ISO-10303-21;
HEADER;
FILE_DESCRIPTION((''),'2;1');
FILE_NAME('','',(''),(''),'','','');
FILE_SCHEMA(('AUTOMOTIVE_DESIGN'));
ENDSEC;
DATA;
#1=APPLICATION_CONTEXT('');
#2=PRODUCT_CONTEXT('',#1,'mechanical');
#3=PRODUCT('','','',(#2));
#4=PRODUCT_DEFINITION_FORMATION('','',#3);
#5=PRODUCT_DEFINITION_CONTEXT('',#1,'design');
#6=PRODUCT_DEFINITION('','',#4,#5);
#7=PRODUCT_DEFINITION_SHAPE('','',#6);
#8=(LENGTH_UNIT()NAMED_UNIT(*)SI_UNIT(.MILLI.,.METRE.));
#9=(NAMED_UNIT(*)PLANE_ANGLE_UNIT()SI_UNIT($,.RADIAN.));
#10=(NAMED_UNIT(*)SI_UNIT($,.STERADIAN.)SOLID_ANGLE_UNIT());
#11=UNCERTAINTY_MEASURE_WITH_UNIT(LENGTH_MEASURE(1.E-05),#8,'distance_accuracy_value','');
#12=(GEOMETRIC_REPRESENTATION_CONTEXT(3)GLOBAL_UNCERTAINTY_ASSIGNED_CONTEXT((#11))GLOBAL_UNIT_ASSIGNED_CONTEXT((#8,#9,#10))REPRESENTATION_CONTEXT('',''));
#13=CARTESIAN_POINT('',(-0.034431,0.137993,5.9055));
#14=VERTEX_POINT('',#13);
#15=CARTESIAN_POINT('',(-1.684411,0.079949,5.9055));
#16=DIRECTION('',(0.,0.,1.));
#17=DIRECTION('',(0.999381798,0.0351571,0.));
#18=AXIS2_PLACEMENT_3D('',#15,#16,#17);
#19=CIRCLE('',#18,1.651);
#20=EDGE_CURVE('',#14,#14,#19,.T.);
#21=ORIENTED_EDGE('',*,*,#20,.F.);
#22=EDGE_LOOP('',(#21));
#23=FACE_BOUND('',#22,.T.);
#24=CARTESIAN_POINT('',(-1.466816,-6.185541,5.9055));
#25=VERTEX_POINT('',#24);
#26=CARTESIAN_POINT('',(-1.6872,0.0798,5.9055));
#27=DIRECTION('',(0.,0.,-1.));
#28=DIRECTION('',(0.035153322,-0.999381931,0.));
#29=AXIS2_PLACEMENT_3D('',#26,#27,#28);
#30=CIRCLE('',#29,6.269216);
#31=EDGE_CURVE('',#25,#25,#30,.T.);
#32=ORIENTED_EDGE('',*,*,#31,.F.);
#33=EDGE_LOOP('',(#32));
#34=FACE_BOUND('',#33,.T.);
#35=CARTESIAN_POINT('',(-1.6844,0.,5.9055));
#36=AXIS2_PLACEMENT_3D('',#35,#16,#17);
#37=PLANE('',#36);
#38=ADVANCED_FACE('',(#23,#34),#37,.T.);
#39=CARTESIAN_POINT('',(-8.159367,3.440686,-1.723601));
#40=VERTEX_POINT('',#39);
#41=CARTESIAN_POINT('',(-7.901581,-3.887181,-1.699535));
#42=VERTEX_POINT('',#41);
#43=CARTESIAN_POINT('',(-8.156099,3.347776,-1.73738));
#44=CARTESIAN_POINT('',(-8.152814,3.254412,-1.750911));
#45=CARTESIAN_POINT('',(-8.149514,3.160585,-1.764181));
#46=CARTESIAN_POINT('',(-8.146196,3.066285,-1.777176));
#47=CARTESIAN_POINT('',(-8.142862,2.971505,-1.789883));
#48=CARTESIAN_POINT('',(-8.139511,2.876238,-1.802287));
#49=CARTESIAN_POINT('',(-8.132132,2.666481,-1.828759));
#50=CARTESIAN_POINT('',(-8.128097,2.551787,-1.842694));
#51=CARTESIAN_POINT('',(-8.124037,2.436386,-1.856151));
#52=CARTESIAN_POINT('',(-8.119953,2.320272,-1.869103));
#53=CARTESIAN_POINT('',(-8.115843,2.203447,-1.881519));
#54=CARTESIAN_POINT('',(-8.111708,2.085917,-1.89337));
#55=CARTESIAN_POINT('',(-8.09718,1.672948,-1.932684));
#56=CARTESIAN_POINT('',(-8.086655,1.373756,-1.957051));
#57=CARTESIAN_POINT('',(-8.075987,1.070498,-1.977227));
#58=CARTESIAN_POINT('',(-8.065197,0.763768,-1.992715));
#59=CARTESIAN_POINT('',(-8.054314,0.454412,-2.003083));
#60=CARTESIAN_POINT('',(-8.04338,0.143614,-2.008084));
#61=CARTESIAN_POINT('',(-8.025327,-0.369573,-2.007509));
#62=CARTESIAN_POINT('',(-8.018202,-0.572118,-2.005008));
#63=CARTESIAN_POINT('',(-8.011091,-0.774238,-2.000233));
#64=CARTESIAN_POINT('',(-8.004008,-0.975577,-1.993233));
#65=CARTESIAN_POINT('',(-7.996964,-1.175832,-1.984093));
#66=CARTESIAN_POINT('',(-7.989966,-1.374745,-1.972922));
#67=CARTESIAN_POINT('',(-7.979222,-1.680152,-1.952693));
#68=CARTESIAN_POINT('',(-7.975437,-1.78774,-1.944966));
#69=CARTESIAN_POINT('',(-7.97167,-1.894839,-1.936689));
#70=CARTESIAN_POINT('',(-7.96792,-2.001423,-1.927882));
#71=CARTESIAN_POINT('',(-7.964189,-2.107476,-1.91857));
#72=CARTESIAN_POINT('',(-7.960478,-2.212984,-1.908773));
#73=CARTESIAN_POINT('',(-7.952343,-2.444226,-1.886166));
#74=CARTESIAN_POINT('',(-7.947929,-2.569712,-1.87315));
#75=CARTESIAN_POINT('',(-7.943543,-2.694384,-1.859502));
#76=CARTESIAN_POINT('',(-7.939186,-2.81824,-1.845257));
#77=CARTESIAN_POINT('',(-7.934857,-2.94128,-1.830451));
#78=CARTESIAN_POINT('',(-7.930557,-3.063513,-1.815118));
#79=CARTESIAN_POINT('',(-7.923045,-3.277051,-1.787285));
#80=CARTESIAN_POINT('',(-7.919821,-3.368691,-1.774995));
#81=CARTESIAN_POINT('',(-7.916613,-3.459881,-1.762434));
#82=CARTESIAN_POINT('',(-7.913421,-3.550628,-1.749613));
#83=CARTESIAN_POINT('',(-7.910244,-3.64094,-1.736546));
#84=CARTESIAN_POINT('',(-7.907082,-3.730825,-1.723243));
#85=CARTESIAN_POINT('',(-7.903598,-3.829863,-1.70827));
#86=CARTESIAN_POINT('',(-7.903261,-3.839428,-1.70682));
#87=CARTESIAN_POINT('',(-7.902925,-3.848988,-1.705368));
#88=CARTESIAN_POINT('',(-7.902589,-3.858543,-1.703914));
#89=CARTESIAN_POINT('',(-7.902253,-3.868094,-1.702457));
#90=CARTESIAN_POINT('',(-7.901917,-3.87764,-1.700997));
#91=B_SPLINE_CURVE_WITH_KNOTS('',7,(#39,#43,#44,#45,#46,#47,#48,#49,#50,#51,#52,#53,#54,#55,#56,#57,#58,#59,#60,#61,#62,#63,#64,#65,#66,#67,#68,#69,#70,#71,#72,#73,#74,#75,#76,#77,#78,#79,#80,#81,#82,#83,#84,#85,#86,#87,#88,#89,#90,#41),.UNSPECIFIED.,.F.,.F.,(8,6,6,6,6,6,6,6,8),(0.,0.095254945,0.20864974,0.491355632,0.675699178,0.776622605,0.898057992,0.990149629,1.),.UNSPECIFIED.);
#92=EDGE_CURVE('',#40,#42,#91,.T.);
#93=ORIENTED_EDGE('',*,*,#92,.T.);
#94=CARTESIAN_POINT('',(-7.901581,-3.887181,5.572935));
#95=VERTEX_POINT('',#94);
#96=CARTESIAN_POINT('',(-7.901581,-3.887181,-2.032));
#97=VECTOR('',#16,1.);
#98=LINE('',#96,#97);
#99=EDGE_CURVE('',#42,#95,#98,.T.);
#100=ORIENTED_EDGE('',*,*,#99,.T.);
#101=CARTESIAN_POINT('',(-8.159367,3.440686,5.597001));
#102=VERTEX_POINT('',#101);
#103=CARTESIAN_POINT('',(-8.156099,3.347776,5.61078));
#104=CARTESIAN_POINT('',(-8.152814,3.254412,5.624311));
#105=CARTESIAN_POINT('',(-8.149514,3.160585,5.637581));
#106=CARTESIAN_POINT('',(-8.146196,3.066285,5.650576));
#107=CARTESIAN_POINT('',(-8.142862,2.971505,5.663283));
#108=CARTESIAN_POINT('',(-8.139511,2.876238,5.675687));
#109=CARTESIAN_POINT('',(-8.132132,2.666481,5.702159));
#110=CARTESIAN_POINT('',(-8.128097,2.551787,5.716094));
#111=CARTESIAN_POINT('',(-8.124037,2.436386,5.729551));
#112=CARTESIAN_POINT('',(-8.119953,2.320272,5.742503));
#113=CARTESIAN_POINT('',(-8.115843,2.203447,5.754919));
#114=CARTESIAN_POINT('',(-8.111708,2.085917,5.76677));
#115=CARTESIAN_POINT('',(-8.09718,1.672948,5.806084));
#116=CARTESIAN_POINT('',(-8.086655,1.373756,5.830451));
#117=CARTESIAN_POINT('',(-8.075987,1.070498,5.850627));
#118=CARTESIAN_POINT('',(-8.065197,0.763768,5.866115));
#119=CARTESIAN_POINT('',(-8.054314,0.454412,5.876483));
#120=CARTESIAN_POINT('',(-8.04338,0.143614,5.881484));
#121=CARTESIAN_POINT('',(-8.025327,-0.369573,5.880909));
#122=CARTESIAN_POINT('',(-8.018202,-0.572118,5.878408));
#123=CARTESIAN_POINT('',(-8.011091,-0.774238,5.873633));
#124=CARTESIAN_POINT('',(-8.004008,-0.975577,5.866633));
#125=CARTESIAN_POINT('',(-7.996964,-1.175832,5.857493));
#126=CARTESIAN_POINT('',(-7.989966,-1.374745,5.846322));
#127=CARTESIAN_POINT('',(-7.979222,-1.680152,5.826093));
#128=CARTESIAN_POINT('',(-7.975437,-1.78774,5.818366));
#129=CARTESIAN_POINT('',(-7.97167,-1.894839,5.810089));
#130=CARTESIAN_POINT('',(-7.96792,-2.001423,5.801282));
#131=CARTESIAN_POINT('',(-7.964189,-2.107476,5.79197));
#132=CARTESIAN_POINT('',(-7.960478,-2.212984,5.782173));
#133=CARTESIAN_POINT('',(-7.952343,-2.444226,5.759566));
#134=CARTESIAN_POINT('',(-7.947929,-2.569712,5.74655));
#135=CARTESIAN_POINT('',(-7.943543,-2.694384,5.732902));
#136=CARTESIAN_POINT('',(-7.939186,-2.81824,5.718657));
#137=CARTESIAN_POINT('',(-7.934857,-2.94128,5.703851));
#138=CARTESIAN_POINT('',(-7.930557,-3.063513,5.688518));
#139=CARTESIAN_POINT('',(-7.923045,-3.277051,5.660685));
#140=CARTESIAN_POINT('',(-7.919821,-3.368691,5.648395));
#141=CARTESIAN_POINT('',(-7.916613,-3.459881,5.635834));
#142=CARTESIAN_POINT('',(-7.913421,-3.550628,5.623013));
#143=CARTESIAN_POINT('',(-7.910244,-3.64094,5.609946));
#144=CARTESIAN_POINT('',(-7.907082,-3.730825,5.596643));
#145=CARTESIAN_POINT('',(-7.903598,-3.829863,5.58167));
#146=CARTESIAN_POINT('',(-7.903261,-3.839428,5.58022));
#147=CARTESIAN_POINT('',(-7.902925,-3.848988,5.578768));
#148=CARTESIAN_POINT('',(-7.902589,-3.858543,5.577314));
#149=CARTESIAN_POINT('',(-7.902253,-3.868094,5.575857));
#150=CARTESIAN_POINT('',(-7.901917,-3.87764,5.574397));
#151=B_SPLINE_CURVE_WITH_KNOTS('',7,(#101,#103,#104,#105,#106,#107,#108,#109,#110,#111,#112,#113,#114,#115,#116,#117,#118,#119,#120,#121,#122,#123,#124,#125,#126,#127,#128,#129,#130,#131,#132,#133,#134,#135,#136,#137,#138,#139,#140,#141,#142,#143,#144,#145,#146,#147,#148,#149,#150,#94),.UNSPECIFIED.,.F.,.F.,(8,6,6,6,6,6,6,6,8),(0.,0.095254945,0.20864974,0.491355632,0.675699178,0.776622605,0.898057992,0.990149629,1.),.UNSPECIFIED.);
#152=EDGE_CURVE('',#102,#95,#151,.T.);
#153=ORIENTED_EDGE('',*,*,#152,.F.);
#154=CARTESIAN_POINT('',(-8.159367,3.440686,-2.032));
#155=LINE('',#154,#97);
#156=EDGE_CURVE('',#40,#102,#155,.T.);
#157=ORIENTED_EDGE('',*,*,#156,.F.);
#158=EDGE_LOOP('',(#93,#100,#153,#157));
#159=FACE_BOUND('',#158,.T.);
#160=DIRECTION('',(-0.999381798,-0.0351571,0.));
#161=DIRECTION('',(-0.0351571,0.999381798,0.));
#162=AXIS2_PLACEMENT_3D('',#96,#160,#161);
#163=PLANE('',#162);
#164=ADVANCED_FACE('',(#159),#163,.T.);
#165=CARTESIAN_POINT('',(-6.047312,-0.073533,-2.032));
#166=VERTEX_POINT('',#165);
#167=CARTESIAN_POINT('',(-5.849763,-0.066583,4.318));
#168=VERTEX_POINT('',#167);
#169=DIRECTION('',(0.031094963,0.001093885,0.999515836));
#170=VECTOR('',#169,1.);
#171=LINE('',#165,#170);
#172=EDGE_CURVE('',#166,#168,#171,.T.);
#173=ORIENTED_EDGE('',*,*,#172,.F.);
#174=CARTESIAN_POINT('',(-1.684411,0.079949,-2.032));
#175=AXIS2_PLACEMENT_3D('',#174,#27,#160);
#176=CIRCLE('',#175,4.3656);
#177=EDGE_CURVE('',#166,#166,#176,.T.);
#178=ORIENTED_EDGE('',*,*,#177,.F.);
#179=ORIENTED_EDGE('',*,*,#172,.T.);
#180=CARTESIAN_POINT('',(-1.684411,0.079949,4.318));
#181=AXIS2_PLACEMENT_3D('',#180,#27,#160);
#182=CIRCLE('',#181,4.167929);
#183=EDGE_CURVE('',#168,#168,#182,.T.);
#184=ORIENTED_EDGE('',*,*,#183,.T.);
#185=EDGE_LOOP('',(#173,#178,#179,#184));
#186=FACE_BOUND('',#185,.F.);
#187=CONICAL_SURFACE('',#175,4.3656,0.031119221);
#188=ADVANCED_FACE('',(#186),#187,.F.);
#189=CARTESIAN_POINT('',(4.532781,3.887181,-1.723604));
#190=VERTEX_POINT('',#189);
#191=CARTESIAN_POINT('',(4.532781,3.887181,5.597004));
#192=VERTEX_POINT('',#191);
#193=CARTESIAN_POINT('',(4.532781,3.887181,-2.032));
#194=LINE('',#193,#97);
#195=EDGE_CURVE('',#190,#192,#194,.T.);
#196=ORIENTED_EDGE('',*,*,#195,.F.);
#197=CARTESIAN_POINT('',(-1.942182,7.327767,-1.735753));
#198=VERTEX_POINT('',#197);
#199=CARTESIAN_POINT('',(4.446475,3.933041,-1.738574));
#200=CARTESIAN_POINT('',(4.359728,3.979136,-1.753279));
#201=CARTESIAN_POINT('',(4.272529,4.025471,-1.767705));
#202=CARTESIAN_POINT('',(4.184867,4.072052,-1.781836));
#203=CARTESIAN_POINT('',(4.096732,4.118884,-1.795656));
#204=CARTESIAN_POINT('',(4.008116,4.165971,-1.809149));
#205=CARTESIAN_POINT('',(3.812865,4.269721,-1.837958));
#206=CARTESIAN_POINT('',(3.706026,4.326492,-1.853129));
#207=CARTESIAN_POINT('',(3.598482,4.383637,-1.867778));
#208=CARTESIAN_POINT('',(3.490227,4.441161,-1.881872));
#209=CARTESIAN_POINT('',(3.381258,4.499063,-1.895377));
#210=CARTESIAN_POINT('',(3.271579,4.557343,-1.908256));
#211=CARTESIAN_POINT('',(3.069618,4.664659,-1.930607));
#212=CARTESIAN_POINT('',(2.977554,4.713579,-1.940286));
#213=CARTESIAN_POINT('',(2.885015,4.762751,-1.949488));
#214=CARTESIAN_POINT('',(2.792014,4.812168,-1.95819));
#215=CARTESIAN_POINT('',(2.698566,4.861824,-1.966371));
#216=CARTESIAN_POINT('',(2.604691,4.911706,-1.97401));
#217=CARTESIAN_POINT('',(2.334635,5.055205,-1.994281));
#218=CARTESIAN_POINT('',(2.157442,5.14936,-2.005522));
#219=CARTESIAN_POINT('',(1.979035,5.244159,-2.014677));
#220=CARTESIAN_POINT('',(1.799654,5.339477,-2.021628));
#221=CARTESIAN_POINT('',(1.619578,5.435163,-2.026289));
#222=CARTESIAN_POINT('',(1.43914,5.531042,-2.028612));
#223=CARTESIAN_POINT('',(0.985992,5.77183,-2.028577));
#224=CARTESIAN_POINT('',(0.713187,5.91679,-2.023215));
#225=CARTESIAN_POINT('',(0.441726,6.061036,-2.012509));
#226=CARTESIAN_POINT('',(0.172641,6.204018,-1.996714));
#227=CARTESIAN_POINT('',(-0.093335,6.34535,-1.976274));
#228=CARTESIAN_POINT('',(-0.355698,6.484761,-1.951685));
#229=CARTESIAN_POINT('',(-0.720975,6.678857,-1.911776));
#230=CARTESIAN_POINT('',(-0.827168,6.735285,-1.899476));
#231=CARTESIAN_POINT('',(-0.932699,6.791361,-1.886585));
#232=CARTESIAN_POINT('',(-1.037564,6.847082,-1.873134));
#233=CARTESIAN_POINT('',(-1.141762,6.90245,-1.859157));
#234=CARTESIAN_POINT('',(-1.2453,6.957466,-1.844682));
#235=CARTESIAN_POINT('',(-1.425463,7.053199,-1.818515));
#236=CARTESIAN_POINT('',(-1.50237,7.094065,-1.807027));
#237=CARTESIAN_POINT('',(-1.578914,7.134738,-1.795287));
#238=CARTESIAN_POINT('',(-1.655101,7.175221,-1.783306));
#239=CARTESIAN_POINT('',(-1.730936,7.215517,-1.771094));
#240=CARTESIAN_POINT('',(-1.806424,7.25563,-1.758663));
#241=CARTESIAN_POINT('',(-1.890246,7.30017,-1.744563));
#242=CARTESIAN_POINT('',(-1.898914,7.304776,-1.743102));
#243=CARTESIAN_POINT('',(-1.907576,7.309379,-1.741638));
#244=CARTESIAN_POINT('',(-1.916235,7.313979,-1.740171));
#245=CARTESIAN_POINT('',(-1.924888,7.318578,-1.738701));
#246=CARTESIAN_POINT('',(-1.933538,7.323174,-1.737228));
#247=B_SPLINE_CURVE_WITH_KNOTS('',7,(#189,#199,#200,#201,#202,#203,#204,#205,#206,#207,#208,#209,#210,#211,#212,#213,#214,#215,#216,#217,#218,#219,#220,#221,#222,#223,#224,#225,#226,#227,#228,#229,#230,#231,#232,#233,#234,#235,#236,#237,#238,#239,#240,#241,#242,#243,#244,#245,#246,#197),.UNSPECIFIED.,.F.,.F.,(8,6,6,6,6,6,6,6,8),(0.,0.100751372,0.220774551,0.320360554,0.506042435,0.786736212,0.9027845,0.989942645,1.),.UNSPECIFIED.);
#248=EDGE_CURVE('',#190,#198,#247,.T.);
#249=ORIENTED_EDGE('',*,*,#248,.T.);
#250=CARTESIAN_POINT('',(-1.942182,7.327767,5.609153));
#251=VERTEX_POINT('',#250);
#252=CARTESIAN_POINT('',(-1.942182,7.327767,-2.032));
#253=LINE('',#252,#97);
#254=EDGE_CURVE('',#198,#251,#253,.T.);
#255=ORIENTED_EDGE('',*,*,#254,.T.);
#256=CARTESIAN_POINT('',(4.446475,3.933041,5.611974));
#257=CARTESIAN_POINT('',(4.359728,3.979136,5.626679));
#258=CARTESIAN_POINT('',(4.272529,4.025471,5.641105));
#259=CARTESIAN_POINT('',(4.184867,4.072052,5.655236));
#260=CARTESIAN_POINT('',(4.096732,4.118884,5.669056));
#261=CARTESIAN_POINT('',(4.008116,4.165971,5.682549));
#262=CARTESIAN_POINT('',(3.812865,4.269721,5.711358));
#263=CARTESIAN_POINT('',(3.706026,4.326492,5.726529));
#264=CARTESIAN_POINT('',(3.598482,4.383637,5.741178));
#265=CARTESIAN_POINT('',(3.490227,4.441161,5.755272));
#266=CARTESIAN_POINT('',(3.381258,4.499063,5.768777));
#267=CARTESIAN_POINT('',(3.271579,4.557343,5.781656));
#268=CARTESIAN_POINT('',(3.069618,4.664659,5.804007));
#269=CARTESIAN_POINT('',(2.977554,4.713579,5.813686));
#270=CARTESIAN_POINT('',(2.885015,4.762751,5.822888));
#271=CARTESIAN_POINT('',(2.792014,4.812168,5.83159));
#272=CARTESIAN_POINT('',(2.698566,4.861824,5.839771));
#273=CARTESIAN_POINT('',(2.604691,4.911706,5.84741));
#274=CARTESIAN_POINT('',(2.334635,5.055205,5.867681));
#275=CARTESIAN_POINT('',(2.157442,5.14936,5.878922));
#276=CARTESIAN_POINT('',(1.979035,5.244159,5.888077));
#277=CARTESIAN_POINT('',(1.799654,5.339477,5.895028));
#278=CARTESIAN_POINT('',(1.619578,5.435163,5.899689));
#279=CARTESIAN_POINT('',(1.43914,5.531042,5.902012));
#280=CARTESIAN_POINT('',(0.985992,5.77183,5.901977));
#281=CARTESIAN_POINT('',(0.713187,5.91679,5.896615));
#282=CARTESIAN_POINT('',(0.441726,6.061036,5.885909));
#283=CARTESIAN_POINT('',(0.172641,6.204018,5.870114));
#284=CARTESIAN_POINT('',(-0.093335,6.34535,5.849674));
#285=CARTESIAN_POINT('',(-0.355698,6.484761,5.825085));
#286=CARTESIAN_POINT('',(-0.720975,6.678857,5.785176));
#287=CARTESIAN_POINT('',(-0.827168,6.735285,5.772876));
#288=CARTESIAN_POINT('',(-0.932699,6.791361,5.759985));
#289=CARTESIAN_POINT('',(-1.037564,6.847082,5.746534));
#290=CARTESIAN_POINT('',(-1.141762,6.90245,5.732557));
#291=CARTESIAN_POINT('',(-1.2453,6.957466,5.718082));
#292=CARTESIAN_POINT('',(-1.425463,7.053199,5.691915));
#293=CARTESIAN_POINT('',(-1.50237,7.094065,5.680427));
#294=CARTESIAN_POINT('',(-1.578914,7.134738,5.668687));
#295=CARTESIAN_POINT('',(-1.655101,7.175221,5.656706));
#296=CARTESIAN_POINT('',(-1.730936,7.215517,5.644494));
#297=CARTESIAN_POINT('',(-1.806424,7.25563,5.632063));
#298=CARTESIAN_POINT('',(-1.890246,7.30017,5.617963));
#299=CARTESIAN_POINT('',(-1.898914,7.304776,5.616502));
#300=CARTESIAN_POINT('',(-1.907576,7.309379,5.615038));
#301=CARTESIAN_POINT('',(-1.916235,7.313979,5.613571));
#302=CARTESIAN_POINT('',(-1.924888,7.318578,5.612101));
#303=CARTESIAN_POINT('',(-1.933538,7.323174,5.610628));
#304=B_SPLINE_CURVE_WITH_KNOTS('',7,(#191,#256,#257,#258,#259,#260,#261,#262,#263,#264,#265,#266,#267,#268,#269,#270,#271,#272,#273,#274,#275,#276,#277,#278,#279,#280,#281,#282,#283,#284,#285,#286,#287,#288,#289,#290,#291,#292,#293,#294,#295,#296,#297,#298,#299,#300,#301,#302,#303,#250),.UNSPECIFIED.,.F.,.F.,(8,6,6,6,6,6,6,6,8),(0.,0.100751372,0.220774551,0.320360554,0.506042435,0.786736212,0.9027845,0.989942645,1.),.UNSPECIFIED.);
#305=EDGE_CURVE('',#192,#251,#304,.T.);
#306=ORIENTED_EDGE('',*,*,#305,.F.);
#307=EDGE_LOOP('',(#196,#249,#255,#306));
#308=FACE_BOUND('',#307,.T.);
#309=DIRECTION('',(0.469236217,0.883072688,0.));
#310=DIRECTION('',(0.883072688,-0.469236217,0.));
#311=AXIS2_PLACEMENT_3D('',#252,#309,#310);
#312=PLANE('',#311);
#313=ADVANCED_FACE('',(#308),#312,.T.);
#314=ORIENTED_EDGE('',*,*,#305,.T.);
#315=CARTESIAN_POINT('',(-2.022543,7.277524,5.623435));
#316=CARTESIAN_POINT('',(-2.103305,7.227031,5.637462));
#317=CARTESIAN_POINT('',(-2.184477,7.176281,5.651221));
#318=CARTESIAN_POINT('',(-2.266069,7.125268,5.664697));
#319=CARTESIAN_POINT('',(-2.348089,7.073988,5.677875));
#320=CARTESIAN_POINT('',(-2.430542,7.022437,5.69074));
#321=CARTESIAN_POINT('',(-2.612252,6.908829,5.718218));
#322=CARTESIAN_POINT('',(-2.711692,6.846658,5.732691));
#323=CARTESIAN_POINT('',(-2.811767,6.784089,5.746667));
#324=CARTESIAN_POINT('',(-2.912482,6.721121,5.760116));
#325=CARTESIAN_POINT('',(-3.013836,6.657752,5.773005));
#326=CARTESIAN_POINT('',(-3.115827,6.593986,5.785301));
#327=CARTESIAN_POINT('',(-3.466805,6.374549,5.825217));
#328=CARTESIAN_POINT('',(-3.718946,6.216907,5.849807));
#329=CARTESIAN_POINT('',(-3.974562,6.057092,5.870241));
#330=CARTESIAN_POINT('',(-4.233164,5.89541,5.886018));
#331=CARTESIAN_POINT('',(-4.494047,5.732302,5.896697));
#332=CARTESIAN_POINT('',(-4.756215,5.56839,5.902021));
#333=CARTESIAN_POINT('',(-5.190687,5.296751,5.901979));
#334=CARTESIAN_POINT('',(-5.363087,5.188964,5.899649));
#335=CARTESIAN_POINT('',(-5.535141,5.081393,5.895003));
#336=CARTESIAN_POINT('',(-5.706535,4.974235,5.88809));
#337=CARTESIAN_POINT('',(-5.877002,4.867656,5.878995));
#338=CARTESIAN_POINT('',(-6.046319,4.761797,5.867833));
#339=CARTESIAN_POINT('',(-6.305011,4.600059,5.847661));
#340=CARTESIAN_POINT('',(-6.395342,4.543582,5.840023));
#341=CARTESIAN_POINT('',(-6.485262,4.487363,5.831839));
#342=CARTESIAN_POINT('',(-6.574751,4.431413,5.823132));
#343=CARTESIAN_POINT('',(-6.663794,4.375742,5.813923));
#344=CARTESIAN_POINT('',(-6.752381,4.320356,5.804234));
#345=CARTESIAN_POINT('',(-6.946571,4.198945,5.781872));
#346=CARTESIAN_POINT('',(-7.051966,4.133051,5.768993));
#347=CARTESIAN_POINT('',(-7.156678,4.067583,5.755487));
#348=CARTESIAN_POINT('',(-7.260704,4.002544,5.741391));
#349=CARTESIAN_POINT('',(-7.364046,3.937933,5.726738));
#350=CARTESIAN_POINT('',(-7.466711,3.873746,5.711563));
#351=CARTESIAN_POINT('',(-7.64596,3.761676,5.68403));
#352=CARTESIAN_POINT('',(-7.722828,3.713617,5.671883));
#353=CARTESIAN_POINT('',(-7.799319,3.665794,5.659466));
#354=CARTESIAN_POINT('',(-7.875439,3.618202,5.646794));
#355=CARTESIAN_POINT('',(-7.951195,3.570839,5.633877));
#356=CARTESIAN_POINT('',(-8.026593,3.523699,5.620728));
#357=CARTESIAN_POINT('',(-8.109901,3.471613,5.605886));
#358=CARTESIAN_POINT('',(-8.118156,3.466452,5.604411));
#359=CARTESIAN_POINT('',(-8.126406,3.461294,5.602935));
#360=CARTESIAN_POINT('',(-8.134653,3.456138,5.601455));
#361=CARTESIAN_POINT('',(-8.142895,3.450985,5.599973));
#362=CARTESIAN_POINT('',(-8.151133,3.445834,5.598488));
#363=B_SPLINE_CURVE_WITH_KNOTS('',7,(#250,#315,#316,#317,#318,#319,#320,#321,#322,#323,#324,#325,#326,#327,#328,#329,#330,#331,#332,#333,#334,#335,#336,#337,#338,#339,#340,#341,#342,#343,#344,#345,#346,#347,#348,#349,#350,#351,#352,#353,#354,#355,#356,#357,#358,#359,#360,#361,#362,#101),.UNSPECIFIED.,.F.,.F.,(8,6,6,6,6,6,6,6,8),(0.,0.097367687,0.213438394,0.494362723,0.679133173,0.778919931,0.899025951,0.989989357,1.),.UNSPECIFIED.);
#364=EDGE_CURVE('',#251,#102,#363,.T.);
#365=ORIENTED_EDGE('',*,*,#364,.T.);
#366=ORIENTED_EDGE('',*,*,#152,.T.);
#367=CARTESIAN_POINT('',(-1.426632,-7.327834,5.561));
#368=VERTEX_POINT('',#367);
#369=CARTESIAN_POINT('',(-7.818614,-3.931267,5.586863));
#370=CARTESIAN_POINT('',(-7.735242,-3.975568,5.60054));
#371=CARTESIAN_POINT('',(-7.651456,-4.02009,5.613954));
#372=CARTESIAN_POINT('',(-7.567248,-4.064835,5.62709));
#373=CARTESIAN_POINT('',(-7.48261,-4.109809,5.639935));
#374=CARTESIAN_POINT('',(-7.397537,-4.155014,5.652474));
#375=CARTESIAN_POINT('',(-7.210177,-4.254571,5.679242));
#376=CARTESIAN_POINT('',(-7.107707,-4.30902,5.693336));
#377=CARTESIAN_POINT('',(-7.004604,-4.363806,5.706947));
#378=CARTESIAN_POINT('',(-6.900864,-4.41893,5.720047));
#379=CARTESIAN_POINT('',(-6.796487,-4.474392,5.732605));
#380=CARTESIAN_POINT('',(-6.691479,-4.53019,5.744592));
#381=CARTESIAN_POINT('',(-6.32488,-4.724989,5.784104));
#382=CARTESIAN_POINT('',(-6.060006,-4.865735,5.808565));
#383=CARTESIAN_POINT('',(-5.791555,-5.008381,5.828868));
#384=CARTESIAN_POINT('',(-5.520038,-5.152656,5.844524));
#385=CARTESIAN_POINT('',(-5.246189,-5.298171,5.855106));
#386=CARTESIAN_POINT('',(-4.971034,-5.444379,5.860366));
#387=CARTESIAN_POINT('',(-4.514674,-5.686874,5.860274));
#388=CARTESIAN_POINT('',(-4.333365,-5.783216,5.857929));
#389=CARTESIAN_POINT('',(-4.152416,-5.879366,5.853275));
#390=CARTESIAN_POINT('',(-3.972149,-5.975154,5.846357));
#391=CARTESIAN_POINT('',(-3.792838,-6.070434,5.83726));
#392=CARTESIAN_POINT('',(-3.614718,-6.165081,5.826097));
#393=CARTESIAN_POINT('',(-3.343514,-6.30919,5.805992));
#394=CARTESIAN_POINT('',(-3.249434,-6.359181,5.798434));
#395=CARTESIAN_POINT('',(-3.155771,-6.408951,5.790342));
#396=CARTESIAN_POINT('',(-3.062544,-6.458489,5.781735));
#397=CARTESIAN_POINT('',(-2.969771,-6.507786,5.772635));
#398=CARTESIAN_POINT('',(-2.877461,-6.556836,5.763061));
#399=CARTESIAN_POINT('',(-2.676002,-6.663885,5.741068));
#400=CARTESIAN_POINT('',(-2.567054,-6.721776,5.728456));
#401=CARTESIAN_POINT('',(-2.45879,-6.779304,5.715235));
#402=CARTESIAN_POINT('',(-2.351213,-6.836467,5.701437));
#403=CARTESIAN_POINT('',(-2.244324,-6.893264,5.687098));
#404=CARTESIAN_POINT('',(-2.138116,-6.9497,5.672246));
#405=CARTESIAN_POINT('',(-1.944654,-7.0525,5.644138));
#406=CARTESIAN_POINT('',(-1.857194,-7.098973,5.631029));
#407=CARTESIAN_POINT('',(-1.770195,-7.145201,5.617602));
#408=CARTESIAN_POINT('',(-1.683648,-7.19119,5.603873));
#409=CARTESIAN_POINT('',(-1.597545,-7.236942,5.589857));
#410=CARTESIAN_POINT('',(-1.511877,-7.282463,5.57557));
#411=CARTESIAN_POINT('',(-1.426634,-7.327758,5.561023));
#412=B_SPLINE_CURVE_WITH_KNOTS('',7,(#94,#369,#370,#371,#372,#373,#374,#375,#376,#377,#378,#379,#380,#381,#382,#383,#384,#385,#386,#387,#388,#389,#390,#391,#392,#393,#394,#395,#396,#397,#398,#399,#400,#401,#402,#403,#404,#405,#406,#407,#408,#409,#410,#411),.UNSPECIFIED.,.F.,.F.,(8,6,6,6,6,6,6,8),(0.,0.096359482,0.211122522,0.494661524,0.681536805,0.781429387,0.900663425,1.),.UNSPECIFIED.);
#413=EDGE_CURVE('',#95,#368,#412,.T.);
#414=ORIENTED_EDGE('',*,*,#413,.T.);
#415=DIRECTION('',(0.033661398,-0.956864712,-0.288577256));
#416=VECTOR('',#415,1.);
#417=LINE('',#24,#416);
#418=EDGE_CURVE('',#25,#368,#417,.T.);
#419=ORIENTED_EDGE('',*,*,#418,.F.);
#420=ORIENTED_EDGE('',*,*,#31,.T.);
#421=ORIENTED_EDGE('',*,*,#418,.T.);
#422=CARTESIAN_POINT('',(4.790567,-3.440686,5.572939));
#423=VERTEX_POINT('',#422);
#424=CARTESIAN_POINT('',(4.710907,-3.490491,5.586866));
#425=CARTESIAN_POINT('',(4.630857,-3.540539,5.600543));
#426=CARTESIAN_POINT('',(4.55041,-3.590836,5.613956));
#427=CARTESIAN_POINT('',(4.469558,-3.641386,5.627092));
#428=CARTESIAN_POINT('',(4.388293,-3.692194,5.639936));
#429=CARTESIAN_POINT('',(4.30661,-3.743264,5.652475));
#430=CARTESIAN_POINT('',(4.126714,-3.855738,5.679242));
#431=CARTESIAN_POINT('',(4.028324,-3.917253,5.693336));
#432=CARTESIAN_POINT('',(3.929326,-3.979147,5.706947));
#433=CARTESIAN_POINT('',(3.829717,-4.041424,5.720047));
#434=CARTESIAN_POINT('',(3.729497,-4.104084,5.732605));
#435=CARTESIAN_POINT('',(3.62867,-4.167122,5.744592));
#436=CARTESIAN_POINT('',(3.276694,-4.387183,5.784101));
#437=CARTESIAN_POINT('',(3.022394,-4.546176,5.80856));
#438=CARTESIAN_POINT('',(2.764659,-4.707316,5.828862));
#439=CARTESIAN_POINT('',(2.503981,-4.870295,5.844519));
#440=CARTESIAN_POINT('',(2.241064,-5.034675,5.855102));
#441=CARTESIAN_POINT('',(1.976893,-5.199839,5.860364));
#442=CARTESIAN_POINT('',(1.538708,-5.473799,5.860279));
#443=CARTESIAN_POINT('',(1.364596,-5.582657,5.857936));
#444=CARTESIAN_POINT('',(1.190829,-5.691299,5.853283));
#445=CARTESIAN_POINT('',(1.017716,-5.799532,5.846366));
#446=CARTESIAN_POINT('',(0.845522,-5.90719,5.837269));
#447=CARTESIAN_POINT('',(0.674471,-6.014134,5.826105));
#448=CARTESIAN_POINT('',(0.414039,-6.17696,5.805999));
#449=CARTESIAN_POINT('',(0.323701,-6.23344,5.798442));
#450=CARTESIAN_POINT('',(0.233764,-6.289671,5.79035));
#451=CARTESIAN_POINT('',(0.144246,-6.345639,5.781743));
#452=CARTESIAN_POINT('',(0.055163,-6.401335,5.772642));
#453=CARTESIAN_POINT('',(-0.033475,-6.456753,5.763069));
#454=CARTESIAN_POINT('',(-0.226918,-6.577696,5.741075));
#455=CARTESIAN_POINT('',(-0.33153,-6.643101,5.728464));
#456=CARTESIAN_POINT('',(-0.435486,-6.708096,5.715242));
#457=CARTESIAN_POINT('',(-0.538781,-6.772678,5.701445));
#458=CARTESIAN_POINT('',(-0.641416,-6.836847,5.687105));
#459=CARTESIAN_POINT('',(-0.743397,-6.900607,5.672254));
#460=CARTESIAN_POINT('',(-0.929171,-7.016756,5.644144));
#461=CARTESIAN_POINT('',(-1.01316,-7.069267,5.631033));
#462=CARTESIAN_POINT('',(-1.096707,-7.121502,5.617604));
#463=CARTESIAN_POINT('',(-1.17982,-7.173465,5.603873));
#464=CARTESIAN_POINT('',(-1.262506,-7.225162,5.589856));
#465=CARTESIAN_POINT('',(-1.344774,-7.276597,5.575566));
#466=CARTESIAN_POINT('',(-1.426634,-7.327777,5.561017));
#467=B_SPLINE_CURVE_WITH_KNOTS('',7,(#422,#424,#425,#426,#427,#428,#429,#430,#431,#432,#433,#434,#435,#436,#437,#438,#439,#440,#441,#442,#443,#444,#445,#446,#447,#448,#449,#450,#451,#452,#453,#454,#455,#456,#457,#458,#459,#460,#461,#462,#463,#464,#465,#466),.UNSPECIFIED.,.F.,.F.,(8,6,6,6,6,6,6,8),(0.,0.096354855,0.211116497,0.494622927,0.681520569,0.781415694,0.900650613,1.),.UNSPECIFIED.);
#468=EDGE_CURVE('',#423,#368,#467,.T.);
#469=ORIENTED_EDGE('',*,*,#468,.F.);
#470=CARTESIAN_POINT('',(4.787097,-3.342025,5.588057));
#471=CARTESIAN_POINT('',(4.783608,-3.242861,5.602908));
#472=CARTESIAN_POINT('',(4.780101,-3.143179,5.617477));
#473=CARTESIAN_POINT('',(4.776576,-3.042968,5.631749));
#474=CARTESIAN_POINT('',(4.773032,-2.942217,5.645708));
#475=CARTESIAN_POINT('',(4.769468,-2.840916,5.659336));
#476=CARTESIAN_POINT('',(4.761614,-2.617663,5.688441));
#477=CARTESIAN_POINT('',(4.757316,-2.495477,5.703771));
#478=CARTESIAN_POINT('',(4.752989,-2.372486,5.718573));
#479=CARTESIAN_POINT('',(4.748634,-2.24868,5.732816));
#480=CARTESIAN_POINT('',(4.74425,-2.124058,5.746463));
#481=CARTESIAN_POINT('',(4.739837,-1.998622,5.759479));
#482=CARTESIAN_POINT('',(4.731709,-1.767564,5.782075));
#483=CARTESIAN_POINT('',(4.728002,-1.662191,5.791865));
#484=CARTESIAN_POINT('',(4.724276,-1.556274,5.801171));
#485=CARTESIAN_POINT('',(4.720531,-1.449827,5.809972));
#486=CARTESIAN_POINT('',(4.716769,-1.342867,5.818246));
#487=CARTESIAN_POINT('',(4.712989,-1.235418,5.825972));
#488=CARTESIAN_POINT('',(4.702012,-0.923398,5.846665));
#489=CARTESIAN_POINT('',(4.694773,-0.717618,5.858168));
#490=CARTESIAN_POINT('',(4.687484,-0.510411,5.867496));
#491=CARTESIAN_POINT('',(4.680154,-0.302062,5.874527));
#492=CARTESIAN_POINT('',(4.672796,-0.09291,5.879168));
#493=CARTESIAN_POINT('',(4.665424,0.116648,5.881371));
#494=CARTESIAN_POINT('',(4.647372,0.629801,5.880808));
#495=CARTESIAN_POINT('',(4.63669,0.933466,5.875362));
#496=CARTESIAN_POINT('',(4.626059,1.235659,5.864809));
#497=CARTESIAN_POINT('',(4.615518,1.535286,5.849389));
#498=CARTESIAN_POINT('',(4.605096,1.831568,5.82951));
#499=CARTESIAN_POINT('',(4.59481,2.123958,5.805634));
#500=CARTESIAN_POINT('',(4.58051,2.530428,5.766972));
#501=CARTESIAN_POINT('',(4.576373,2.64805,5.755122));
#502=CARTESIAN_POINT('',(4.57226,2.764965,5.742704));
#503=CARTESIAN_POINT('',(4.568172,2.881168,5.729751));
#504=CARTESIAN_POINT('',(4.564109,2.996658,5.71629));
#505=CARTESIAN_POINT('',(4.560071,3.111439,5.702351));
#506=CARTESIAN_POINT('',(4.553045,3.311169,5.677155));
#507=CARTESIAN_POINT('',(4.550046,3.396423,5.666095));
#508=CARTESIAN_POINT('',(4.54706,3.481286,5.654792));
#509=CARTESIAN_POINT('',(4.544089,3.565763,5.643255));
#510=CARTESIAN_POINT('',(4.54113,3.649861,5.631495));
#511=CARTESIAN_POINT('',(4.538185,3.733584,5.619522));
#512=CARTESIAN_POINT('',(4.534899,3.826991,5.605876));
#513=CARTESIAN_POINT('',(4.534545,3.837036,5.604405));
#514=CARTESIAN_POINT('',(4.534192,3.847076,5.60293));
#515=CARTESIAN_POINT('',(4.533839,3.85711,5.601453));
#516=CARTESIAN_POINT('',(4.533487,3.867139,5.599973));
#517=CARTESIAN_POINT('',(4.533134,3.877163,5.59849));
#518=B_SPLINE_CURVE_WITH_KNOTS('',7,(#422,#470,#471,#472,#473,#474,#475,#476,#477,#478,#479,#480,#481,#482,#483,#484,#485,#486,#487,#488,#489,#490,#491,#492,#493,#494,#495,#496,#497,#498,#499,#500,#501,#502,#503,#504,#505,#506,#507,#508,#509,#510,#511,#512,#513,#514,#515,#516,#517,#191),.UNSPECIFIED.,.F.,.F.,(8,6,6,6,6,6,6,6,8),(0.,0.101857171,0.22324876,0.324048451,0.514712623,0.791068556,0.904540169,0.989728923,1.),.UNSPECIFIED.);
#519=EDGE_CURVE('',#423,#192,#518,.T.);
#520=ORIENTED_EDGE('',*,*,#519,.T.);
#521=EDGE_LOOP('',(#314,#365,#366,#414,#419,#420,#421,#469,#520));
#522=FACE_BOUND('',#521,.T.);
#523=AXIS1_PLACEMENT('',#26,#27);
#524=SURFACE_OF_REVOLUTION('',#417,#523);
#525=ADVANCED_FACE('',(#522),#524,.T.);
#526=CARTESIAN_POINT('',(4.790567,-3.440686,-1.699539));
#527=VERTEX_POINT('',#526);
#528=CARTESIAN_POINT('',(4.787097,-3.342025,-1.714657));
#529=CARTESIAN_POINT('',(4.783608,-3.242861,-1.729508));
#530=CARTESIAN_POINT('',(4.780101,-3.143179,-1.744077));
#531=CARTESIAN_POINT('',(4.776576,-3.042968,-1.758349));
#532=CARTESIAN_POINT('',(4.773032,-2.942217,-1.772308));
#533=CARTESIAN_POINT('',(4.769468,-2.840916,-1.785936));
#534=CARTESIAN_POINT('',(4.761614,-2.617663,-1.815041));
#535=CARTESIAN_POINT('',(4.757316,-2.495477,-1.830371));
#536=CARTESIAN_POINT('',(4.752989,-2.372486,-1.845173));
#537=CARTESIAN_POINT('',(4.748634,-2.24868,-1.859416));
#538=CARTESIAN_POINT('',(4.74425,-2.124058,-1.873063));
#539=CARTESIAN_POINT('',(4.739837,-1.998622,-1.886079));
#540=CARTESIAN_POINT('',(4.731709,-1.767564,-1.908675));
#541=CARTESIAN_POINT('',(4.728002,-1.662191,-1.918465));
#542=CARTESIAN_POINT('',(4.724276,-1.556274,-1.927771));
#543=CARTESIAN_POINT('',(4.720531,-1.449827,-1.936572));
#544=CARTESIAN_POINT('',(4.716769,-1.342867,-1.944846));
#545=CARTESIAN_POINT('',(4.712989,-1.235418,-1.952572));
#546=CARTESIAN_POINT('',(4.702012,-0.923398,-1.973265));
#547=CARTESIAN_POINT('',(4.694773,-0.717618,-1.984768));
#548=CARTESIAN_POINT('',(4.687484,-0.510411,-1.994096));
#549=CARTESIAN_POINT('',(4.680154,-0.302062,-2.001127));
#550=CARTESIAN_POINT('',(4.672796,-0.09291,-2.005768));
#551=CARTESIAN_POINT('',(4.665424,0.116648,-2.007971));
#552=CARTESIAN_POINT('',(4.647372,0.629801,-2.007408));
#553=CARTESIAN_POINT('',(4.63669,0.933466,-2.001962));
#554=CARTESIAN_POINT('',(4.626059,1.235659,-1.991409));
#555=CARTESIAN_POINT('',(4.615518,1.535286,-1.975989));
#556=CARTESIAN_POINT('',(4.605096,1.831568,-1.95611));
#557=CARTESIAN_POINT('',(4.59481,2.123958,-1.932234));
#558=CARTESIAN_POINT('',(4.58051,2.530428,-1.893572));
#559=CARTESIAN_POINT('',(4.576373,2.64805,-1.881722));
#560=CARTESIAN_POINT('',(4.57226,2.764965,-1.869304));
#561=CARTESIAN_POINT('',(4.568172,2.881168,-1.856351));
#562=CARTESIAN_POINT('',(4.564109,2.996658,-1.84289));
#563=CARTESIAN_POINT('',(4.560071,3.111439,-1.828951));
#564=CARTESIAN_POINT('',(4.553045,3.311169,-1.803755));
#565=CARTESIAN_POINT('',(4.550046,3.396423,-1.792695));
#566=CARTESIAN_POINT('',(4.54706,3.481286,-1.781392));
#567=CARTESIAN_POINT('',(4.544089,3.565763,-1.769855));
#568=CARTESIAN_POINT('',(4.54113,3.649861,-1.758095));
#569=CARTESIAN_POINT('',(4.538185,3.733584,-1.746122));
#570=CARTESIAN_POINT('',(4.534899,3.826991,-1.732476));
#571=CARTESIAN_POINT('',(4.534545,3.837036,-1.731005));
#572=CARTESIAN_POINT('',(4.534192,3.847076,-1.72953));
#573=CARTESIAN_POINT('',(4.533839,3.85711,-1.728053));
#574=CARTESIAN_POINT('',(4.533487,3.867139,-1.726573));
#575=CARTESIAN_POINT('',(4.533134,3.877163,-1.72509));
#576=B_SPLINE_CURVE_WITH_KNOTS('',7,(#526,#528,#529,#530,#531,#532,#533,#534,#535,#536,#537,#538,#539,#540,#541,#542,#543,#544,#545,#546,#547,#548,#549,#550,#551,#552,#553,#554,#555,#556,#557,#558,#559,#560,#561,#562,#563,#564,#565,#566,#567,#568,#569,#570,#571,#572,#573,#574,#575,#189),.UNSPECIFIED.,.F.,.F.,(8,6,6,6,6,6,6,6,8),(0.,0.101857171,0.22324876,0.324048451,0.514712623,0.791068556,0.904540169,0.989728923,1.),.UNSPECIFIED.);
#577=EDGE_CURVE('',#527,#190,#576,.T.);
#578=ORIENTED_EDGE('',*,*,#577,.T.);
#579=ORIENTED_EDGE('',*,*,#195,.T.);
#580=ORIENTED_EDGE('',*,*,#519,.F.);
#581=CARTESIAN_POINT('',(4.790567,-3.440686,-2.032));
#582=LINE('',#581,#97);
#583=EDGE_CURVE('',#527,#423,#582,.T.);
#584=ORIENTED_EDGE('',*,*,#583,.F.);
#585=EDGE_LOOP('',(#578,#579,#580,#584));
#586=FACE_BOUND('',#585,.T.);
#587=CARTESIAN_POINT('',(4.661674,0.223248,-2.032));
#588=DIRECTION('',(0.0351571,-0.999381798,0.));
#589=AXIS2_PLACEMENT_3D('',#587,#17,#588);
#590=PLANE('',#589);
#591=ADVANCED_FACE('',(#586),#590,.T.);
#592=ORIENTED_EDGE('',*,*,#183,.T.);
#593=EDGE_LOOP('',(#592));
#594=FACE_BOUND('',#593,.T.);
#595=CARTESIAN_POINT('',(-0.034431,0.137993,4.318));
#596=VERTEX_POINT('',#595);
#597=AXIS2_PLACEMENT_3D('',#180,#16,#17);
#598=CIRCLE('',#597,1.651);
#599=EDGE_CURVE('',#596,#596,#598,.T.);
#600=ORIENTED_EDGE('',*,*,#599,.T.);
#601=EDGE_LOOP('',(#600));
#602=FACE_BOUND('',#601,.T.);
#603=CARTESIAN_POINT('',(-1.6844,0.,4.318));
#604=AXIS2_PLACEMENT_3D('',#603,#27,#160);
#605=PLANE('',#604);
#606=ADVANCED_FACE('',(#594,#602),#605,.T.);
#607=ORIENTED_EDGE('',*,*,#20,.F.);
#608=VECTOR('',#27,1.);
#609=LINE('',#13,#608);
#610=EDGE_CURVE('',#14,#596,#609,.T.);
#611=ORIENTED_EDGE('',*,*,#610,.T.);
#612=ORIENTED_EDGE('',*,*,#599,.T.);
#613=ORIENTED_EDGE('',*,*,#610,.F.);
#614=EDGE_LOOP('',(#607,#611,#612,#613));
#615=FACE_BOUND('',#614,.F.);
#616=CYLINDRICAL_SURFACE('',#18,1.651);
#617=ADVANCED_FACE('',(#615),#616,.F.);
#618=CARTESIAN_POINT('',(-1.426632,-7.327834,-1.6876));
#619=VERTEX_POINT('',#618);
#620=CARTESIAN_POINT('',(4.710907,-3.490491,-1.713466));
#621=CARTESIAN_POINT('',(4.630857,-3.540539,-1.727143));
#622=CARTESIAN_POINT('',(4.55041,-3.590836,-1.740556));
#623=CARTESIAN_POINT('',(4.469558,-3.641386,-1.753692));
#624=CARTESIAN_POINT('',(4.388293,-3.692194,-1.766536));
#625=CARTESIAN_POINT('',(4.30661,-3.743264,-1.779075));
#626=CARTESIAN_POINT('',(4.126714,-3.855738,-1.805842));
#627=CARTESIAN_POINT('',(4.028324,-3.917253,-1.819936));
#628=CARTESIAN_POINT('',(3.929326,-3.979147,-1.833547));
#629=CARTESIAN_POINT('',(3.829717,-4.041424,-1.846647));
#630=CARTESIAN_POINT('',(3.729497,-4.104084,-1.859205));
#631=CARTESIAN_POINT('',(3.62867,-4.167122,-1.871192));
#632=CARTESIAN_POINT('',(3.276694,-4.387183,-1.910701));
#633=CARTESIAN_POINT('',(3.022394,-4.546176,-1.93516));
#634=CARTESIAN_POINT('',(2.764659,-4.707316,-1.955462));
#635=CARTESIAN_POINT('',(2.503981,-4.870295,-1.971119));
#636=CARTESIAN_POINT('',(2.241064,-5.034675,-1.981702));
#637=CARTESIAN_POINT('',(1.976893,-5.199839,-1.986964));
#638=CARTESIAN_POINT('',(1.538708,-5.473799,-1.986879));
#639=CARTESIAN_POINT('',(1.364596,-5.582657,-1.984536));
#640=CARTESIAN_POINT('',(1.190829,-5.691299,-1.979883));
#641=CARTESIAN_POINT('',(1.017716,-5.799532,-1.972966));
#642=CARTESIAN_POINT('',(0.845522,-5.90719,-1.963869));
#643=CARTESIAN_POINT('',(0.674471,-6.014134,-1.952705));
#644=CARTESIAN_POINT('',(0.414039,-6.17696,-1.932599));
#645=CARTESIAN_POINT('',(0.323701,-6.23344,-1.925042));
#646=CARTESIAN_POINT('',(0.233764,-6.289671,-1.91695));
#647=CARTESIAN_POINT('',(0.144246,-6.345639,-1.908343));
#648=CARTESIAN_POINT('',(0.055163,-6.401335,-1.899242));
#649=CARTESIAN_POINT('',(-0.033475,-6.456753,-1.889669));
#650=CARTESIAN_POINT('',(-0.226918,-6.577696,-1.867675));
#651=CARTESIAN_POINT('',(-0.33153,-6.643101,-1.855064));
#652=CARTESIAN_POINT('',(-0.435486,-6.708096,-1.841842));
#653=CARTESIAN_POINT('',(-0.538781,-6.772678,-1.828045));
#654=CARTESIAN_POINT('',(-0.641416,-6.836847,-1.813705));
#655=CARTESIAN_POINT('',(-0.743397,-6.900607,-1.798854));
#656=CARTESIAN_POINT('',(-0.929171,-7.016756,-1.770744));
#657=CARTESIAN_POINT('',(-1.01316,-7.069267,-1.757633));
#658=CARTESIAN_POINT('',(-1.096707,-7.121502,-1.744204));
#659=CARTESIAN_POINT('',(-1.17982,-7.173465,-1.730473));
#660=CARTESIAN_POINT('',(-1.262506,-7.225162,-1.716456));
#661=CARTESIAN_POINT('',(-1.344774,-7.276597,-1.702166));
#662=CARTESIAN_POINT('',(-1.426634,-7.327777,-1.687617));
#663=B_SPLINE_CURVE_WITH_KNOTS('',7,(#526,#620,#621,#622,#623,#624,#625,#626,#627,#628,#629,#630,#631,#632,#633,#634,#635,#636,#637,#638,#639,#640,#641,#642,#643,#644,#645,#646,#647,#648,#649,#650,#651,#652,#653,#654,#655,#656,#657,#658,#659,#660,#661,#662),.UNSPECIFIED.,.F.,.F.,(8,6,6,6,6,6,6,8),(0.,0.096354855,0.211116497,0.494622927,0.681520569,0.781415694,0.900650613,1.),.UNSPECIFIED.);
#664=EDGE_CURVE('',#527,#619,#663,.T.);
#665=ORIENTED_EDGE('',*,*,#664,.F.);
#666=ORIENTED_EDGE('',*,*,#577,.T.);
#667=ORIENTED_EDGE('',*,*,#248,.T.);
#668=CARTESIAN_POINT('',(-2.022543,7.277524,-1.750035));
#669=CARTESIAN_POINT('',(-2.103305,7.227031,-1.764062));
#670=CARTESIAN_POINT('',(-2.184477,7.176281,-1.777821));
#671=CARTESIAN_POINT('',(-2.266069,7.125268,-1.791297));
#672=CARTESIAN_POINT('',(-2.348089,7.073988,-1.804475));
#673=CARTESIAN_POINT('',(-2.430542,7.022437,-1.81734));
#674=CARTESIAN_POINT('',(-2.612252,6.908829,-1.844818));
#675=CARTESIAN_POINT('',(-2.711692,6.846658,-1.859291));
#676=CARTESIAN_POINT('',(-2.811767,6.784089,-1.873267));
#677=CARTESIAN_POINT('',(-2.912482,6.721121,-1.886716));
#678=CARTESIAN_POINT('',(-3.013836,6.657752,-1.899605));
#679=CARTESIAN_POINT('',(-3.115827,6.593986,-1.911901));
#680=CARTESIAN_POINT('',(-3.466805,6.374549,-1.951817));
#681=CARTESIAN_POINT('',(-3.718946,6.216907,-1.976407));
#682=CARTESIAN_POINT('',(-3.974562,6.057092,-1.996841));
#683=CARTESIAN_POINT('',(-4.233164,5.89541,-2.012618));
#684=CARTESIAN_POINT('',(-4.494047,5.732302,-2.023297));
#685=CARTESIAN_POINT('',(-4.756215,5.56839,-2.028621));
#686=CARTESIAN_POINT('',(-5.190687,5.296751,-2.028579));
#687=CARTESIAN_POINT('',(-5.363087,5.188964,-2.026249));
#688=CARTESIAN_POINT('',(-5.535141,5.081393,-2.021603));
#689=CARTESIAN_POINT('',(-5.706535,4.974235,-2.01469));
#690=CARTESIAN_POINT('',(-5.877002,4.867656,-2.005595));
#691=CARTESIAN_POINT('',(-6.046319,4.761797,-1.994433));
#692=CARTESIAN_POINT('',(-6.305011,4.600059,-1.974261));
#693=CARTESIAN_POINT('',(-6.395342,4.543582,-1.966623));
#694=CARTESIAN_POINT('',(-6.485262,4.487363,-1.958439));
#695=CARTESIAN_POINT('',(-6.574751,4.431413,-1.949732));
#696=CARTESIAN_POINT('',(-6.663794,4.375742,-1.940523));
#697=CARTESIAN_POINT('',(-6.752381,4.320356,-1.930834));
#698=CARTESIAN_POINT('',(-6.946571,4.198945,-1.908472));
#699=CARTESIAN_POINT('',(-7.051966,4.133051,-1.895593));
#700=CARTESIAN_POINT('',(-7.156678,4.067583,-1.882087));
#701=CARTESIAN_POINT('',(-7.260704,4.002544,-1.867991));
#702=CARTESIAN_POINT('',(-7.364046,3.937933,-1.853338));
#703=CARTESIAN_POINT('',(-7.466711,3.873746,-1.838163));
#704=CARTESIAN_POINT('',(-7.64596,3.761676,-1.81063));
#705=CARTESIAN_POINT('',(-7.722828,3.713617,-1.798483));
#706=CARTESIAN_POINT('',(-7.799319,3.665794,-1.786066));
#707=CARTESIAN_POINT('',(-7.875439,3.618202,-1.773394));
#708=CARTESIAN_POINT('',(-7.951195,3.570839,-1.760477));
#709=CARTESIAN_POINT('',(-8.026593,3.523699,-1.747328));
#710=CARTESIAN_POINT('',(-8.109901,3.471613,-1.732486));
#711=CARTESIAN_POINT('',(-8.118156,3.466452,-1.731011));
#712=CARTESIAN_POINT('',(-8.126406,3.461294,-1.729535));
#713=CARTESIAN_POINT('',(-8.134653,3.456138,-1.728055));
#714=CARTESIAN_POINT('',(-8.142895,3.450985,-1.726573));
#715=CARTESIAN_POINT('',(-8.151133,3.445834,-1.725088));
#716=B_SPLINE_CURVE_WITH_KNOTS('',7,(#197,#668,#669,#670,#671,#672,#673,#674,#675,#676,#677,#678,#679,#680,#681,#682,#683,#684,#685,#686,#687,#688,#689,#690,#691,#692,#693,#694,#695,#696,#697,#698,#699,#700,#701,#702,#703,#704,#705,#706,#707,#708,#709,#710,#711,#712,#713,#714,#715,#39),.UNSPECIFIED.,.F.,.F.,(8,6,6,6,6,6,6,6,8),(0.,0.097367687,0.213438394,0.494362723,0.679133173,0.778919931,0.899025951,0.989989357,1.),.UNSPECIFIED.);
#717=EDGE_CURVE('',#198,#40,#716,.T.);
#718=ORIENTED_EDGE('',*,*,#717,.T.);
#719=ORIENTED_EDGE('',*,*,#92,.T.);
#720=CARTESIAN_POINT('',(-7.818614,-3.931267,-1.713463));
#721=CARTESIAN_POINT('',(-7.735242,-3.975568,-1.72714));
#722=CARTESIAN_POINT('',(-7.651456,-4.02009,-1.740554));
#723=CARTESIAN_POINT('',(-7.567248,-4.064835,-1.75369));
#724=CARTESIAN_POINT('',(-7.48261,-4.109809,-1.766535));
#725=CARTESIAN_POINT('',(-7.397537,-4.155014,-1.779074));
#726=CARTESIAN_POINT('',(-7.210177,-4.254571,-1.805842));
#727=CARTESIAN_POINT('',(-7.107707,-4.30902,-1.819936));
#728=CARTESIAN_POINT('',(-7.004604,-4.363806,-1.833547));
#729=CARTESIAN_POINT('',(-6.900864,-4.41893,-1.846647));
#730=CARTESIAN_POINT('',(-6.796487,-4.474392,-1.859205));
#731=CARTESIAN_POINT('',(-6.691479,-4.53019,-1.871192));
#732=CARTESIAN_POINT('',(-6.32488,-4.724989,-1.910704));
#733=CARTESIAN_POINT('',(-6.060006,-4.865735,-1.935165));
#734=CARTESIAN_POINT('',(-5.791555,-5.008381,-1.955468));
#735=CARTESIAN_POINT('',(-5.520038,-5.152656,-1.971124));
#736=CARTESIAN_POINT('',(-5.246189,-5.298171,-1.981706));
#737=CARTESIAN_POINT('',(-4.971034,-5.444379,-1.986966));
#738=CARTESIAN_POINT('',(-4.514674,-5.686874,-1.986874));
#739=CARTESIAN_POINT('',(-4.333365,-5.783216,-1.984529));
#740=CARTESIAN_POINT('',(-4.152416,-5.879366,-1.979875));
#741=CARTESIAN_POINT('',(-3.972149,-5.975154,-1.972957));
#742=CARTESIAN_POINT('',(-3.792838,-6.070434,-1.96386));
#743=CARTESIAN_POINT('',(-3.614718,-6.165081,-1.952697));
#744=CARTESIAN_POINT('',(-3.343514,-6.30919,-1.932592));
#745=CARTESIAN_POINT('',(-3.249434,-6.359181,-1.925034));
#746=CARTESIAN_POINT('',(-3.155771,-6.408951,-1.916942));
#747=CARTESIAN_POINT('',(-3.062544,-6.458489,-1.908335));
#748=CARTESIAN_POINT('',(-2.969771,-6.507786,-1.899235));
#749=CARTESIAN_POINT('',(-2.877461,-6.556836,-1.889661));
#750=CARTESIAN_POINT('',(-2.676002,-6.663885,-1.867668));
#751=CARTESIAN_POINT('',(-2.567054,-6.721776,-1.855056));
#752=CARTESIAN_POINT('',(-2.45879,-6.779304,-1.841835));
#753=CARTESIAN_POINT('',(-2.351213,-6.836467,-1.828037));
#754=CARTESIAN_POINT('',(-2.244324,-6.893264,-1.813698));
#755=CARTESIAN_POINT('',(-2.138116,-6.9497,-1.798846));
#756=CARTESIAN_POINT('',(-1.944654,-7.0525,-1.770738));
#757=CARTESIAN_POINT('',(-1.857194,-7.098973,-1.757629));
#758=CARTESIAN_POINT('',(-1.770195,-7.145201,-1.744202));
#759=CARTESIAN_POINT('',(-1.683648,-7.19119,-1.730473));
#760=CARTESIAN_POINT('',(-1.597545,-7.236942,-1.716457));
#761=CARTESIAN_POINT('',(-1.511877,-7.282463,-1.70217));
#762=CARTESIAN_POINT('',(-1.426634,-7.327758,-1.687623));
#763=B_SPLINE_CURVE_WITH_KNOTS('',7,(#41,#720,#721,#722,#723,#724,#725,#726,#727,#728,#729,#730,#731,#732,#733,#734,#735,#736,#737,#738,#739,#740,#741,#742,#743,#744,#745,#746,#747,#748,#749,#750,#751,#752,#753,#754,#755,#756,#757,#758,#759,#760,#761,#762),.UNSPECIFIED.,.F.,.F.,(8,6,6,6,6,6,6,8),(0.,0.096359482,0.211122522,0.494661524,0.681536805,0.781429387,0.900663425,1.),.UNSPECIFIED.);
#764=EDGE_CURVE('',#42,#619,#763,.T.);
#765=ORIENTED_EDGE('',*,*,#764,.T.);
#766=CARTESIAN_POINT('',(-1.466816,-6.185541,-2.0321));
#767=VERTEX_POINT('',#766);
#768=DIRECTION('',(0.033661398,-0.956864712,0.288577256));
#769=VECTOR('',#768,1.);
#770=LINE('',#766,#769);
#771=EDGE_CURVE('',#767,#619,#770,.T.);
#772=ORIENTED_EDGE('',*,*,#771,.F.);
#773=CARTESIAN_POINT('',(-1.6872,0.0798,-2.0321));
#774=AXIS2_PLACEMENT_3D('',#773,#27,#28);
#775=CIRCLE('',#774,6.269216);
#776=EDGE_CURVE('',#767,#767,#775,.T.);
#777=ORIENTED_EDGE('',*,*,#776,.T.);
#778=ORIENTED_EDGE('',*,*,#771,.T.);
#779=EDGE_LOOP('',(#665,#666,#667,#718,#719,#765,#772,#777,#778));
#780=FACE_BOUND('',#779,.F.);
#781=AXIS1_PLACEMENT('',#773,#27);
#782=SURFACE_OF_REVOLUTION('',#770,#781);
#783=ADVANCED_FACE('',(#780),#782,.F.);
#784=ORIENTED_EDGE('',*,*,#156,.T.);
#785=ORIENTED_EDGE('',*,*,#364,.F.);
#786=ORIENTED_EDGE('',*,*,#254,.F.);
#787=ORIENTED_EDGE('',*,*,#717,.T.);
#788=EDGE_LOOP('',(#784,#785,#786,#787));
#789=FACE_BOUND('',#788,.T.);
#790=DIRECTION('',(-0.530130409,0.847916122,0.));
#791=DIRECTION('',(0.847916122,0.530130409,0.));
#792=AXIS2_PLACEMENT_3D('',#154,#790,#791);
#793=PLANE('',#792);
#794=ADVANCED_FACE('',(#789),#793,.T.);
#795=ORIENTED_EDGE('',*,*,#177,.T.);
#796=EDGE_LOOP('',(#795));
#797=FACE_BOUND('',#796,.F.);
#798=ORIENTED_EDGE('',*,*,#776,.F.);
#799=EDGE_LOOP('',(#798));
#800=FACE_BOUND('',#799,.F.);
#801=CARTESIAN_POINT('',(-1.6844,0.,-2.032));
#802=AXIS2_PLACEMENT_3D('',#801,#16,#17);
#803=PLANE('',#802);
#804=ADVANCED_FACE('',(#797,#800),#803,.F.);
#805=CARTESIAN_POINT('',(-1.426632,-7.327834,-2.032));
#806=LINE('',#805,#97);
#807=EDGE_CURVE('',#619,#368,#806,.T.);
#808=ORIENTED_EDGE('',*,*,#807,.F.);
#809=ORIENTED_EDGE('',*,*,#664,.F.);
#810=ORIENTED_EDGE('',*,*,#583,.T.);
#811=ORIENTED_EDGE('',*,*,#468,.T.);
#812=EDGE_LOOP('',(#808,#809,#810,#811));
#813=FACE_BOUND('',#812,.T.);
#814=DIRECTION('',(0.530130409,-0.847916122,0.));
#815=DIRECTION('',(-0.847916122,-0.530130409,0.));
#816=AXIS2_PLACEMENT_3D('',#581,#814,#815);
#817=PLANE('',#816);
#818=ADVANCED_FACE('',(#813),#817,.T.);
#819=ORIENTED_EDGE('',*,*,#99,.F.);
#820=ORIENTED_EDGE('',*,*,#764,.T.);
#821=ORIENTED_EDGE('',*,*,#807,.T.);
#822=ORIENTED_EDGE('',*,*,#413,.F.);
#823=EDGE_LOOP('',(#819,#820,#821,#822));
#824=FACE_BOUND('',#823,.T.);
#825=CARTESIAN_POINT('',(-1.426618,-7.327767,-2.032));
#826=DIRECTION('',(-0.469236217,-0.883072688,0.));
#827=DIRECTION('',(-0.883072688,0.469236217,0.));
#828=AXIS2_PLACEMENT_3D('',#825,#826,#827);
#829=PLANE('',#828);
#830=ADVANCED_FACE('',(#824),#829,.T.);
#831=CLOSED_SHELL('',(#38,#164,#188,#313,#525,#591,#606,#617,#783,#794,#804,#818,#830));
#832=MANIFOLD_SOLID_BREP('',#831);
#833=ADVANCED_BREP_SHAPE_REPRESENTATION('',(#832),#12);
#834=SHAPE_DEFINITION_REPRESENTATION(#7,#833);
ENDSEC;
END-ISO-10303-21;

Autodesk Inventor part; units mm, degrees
ref_plane "Work Plane3" through (-1.6844, 0, -2.032) normal (0, 0, 1) x (0.9993818, 0.0351571, 0)
sketch "Sketch6" plane through (-1.6844, 0, -2.032) normal (0, 0, 1) x (0.9993818, 0.0351571, 0)
  circle A0 centre (0, 0) radius 6.35
  line L0 (0, 7.3323) -> (6.35, 3.6662)
  line L1 (6.35, 3.6662) -> (6.35, -3.6662)
  line L2 (6.35, -3.6662) -> (0, -7.3323)
  line L3 (0, -7.3323) -> (-6.35, -3.6662)
  line L4 (-6.35, -3.6662) -> (-6.35, 3.6662)
  line L5 (-6.35, 3.6662) -> (0, 7.3323)
  point P0 (1.6833, -0.0592)
  point P1 (0, 7.8524)
  dimension "d5" = 12.7
extrude "Extrusion2" add sketch "Sketch6" along normal blind 7.9375
sketch "Sketch7" plane through (-1.6844, 0, -2.032) normal (0, 0, -1) x (-0.9993818, -0.0351571, 0)
  circle A0 centre (-0.0028, 0.0799) radius 4.3656 projected
  point P0 (-1.6833, -0.0592)
extrude "Extrusion3" cut sketch "Sketch7" against normal blind 6.35 draft -1.783
sketch "Sketch8" plane through (-1.6844, 0, 5.9055) normal (0, 0, 1) x (0.9993818, 0.0351571, 0)
  circle A0 centre (0.0028, 0.0799) radius 1.651 projected
  point P0 (1.6833, -0.0592)
extrude "Extrusion4" cut sketch "Sketch8" against normal through all
thread "Thread1" size "1/8" designation "1/8 - 27 NPT" standard "NPT for PVC Pipe and Fitting" length 9.9568
ref_plane "Work Plane4" through (-1.9422, 7.3278, -2.032) normal (0.9993818, 0.0351571, 0) x (0, 0, 1)
sketch "Sketch9" plane through (-1.9422, 7.3278, -2.032) normal (0.9993818, 0.0351571, 0) x (0, 0, 1)
  line L0 (7.9375, 13.5217) -> (7.593, 14.6647)
  line L1 (7.593, 14.6647) -> (7.9375, 13.5217)
  line L2 (7.593, 14.6647) -> (7.9375, 14.6647)
  line L3 (7.9375, 14.6647) -> (7.9375, 13.5217)
  line L4 (9.525, 7.2525) -> (-1.5875, 7.2525) projected
  point P0 (2.032, 7.3916)
  dimension "d13" = 1.143
revolve "Revolution2" cut sketch "Sketch9" angle 360 about axis through (-1.6872, 0.0798, 5.9055) along (0, 0, -1)
ref_plane "Work Plane5" through (-1.6872, 0.0798, 1.9367) normal (0, 0, 1) x (1, 0, 0)
mirror "Mirror1" about plane through (-1.6872, 0.0798, 1.9367) normal (0, 0, 1) of "Revolution2"
properties part number "Pneumatics_VIAIR_Fitting_01"
